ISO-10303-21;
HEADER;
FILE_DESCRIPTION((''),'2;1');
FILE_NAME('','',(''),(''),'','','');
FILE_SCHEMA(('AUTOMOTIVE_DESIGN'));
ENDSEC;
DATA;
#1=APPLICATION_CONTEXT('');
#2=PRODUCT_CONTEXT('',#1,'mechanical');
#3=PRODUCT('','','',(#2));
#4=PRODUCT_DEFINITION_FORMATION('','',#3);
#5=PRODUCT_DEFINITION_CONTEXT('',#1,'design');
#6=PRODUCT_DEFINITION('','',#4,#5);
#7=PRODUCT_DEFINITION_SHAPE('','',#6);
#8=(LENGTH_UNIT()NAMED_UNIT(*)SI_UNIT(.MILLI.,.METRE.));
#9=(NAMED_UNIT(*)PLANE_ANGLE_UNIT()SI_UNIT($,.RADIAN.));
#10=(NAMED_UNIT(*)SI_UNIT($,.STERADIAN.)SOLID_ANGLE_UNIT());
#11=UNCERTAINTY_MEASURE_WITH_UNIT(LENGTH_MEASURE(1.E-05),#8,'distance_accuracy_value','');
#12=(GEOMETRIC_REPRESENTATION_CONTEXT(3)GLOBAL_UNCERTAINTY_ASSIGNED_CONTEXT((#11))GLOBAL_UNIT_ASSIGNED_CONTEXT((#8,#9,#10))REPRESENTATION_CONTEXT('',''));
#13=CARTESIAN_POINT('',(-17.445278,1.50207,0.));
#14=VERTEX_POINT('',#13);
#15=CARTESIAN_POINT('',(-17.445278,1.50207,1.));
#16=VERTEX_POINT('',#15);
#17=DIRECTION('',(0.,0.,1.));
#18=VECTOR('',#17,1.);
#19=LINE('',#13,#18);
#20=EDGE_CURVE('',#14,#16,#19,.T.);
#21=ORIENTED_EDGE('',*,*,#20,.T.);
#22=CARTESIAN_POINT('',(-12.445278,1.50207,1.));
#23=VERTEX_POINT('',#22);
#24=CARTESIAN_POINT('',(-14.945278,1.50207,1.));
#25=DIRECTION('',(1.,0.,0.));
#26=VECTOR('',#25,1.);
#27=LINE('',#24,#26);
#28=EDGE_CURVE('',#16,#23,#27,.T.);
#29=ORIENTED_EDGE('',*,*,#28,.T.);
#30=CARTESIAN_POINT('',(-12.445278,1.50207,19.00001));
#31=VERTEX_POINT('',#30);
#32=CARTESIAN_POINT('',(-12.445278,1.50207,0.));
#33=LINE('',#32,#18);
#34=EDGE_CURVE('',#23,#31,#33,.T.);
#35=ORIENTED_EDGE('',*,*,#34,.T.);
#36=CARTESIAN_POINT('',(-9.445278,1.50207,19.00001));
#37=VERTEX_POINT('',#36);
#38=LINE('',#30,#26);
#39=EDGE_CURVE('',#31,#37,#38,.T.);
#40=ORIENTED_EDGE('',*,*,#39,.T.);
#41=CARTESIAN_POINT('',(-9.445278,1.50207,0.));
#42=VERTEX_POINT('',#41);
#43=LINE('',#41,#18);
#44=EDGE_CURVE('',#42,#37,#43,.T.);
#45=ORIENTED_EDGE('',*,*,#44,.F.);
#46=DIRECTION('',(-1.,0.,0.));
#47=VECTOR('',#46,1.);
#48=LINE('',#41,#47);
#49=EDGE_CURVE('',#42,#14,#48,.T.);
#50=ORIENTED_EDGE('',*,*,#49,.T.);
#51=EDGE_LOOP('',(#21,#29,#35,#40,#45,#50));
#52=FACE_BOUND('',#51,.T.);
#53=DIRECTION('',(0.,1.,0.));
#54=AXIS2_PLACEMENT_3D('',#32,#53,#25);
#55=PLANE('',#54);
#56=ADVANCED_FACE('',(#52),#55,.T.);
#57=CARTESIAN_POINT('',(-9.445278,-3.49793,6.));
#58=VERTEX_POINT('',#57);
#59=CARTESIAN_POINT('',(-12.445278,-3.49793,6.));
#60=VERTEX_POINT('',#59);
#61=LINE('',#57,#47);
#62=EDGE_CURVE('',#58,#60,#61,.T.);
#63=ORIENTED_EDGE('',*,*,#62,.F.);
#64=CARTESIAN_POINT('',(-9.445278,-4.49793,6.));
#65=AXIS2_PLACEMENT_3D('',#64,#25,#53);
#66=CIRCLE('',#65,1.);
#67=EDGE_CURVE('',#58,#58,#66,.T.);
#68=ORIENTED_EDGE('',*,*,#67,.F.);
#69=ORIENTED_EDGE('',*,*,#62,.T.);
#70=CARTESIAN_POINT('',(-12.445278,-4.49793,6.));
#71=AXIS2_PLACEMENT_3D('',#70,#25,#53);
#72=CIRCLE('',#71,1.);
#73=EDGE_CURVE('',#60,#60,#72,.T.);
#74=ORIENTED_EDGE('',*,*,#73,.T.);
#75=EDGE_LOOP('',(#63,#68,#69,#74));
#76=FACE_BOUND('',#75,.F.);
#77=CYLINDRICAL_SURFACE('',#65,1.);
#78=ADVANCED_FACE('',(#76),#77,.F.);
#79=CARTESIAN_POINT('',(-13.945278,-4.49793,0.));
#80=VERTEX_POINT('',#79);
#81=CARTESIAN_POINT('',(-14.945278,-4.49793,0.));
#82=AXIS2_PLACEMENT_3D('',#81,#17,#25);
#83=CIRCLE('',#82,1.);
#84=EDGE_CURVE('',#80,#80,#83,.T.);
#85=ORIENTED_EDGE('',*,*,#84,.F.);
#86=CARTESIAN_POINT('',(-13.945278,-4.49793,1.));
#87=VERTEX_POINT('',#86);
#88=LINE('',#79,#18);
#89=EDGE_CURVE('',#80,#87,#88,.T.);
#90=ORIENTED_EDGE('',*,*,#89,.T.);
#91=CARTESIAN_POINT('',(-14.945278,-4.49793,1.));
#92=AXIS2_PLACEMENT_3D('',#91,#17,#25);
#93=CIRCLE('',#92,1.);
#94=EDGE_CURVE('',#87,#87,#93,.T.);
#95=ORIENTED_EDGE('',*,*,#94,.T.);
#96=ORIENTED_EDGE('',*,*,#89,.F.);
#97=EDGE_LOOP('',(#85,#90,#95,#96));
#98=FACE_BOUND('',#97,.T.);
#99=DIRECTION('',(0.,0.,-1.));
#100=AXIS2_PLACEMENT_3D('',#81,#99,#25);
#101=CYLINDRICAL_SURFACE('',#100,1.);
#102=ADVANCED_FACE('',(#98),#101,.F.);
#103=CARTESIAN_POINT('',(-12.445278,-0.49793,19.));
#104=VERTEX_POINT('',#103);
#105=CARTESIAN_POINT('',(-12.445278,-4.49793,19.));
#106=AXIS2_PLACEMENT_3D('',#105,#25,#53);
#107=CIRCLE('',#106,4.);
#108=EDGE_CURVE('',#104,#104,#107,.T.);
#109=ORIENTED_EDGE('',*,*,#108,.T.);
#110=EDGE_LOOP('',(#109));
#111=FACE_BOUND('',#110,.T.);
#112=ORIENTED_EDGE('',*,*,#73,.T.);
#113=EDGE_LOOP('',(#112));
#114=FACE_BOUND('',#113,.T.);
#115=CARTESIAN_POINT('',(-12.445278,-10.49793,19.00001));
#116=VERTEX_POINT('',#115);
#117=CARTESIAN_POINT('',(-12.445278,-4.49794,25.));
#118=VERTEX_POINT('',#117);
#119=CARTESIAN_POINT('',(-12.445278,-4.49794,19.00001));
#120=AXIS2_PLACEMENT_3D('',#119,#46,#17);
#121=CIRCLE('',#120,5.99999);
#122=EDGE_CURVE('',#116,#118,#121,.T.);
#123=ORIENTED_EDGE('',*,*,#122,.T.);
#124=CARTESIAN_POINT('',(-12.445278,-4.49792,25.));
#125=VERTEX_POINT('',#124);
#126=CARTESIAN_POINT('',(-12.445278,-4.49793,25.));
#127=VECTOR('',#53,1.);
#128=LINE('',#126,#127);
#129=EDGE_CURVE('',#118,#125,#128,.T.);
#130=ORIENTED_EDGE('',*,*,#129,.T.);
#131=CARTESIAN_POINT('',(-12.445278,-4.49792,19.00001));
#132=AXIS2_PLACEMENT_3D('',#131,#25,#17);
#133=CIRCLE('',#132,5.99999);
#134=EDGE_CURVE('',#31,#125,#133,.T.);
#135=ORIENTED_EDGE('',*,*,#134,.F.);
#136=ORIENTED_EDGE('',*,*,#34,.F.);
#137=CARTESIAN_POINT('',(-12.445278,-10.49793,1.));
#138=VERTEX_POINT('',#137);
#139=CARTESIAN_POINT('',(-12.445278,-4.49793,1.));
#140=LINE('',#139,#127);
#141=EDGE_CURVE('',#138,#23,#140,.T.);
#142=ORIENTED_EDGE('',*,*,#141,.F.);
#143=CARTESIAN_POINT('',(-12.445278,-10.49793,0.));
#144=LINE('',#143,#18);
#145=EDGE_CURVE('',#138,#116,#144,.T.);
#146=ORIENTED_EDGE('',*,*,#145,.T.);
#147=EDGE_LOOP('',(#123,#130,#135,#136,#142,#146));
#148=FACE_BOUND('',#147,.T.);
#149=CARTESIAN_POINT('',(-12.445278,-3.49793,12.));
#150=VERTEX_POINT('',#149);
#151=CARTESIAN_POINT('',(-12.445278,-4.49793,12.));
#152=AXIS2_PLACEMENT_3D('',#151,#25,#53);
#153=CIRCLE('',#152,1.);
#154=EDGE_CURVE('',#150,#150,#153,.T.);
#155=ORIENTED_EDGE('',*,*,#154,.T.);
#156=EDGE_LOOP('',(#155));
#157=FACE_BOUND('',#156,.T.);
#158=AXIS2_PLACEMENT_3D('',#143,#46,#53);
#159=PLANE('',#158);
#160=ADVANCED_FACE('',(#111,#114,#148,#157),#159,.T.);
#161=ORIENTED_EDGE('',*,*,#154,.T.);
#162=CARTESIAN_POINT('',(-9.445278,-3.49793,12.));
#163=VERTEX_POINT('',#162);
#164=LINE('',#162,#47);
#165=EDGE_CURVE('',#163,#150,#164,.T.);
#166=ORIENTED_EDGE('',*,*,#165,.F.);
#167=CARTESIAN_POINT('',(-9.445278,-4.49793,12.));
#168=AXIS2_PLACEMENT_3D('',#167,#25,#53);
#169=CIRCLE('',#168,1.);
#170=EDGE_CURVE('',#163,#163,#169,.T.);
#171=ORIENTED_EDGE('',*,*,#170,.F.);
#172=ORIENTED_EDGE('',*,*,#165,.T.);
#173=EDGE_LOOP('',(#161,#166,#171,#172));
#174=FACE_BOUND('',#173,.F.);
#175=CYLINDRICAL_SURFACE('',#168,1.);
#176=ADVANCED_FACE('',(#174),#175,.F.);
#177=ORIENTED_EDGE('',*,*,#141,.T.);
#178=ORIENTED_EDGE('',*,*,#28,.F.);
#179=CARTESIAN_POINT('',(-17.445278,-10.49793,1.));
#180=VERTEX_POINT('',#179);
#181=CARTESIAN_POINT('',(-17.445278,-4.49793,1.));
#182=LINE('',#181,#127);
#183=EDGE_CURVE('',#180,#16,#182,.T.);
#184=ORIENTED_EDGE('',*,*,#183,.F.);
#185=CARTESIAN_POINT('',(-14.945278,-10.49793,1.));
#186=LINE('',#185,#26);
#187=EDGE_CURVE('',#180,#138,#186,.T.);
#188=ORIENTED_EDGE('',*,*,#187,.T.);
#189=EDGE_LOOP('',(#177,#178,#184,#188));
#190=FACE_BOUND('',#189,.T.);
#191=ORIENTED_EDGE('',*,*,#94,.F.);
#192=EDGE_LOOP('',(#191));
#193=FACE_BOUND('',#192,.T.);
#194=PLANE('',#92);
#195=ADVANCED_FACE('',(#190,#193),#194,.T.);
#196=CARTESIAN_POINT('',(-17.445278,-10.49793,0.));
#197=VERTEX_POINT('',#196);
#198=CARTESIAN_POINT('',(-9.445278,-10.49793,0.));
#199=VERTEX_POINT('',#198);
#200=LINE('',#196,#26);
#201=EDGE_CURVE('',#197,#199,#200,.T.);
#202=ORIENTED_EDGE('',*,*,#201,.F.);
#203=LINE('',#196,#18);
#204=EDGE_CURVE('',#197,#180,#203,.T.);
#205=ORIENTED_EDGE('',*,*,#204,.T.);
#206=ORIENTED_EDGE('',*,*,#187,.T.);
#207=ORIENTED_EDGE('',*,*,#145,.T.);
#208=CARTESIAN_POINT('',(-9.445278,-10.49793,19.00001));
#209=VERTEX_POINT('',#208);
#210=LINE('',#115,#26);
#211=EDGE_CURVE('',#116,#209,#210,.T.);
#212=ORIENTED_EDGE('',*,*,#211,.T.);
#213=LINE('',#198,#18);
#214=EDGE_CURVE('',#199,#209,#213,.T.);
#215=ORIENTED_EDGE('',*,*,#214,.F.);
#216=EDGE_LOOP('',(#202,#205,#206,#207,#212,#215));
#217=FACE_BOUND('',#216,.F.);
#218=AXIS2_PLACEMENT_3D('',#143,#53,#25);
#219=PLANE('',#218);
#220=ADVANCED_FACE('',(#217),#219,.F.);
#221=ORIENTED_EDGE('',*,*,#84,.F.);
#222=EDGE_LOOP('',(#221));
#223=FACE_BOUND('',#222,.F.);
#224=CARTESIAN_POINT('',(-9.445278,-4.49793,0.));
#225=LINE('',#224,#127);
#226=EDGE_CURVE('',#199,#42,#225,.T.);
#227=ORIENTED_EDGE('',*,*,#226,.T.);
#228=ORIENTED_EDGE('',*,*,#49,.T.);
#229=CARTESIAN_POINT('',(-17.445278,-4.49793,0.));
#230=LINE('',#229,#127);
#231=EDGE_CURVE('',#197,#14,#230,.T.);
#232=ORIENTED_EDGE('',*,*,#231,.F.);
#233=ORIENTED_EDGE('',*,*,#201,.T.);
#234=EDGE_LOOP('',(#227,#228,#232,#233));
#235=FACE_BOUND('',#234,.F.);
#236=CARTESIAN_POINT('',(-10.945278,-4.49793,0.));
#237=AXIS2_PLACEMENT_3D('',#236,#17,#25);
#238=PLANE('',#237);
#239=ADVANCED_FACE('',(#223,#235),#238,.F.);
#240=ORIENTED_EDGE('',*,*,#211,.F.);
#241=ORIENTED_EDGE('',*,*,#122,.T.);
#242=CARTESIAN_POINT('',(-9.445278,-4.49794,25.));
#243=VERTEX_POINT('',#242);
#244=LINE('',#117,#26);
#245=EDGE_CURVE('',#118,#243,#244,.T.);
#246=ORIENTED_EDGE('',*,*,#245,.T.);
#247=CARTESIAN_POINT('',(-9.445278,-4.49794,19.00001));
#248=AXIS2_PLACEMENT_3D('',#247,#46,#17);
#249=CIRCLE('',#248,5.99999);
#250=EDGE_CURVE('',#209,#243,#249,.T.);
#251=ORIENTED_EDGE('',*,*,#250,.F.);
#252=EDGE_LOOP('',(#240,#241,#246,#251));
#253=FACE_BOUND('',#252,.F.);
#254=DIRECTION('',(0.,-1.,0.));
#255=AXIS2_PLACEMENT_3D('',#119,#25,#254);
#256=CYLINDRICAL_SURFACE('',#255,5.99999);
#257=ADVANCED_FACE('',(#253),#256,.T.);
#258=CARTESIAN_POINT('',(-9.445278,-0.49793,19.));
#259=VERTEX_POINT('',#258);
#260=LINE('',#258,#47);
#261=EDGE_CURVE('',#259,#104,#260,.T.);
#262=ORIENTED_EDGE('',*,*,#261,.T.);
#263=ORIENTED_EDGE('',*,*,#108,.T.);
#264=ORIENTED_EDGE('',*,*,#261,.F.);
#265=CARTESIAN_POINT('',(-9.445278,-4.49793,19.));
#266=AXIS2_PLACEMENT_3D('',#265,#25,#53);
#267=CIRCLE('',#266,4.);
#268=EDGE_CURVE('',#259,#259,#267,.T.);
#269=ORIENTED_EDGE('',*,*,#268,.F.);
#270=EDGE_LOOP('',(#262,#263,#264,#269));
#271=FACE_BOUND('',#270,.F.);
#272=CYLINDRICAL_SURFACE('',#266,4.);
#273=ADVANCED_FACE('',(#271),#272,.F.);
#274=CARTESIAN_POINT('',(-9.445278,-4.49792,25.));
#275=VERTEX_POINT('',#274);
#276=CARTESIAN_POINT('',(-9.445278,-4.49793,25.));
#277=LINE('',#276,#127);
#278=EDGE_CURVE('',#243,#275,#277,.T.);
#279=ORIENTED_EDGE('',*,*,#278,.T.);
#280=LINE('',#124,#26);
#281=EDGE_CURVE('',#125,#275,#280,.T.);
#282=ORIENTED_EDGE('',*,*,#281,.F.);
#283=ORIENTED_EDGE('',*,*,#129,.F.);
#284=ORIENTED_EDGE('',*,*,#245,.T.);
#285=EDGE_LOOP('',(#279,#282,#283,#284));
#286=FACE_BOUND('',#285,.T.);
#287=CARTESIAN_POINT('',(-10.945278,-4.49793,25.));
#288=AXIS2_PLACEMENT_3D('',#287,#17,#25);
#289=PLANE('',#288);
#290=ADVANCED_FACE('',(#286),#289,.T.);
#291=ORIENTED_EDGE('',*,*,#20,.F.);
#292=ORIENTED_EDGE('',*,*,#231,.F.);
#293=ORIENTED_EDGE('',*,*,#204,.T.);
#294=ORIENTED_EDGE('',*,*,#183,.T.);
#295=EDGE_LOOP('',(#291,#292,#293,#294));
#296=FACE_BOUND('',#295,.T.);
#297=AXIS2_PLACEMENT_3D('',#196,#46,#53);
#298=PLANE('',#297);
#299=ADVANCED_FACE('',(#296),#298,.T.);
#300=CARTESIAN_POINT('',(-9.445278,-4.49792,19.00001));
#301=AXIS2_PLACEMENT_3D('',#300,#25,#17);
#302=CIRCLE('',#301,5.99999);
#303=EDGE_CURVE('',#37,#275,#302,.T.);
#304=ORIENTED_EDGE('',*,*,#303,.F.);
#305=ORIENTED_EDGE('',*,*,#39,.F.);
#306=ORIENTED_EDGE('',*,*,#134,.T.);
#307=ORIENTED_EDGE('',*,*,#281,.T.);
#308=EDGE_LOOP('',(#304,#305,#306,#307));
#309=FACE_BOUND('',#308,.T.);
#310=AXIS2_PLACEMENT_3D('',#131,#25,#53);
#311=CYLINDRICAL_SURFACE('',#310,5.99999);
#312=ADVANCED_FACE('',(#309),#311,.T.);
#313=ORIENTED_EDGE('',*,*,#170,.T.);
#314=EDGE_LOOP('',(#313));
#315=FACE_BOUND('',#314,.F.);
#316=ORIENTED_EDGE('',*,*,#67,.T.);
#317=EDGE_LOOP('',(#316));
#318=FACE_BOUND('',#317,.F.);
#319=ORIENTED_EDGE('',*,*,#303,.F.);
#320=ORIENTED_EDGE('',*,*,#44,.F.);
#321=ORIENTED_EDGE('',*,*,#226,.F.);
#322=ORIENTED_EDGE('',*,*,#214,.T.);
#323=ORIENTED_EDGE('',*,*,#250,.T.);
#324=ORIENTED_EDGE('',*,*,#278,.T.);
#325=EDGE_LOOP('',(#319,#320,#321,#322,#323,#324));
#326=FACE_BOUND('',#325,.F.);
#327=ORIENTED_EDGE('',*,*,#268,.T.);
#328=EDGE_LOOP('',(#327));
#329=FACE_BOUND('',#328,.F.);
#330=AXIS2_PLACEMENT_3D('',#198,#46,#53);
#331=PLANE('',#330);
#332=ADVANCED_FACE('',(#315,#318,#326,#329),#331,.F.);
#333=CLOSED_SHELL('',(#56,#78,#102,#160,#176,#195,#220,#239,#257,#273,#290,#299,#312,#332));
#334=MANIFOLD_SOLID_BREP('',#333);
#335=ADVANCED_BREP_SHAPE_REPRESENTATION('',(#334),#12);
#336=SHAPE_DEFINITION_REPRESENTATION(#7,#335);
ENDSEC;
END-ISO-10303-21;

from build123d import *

# Parameters (mm, degrees)
F0_W     = 5
F0_H     = 12
F0_R     = 1
F1_DEPTH = 1
F0_W_2   = 3
F2_DEPTH = 25
F3_R     = 4
F3_R_2   = 1
F4_DEPTH = 3
F5_R     = 5.99999


# Not quite as in the source:
# - a fillet or chamfer is up to 0.001 mm smaller than in the source, because OpenCascade refuses the exact size


with BuildPart() as f1:
    # F0 (on Top) → F1 (new body)
    with BuildSketch(Plane.XY):
        with Locations((-14.9452780058, -4.4979301263)):
            Rectangle(F0_W, F0_H)
        with Locations((-14.9452780058, -4.4979301263)):
            Circle(F0_R, mode=Mode.SUBTRACT)
    extrude(amount=F1_DEPTH)

    # F0 (on Top) → F2 (join)
    with BuildSketch(Plane.XY):
        with Locations((-10.9452780058, -4.4979301263)):
            Rectangle(F0_W_2, F0_H)
    extrude(amount=F2_DEPTH)

    # F3 (on face) → F4 (cut)
    with BuildSketch(Plane.YZ.offset(-9.4452780058)):
        with Locations((-4.4979301263, 19)):
            Circle(F3_R)
        with Locations((-4.4979301263, 12)):
            Circle(F3_R_2)
        with Locations((-4.4979301263, 6)):
            Circle(F3_R_2)
    extrude(amount=-F4_DEPTH, mode=Mode.SUBTRACT)

    # F5 (radius 6 in the source; OpenCascade refuses exactly that, so slightly less here)
    f5_edges = [f1.edges().sort_by_distance(p)[0] for p in [
        (-10.945278, 1.50207, 25),
        (-10.945278, -10.49793, 25),
    ]]
    fillet(f5_edges, radius=F5_R)


solid = f1.part
